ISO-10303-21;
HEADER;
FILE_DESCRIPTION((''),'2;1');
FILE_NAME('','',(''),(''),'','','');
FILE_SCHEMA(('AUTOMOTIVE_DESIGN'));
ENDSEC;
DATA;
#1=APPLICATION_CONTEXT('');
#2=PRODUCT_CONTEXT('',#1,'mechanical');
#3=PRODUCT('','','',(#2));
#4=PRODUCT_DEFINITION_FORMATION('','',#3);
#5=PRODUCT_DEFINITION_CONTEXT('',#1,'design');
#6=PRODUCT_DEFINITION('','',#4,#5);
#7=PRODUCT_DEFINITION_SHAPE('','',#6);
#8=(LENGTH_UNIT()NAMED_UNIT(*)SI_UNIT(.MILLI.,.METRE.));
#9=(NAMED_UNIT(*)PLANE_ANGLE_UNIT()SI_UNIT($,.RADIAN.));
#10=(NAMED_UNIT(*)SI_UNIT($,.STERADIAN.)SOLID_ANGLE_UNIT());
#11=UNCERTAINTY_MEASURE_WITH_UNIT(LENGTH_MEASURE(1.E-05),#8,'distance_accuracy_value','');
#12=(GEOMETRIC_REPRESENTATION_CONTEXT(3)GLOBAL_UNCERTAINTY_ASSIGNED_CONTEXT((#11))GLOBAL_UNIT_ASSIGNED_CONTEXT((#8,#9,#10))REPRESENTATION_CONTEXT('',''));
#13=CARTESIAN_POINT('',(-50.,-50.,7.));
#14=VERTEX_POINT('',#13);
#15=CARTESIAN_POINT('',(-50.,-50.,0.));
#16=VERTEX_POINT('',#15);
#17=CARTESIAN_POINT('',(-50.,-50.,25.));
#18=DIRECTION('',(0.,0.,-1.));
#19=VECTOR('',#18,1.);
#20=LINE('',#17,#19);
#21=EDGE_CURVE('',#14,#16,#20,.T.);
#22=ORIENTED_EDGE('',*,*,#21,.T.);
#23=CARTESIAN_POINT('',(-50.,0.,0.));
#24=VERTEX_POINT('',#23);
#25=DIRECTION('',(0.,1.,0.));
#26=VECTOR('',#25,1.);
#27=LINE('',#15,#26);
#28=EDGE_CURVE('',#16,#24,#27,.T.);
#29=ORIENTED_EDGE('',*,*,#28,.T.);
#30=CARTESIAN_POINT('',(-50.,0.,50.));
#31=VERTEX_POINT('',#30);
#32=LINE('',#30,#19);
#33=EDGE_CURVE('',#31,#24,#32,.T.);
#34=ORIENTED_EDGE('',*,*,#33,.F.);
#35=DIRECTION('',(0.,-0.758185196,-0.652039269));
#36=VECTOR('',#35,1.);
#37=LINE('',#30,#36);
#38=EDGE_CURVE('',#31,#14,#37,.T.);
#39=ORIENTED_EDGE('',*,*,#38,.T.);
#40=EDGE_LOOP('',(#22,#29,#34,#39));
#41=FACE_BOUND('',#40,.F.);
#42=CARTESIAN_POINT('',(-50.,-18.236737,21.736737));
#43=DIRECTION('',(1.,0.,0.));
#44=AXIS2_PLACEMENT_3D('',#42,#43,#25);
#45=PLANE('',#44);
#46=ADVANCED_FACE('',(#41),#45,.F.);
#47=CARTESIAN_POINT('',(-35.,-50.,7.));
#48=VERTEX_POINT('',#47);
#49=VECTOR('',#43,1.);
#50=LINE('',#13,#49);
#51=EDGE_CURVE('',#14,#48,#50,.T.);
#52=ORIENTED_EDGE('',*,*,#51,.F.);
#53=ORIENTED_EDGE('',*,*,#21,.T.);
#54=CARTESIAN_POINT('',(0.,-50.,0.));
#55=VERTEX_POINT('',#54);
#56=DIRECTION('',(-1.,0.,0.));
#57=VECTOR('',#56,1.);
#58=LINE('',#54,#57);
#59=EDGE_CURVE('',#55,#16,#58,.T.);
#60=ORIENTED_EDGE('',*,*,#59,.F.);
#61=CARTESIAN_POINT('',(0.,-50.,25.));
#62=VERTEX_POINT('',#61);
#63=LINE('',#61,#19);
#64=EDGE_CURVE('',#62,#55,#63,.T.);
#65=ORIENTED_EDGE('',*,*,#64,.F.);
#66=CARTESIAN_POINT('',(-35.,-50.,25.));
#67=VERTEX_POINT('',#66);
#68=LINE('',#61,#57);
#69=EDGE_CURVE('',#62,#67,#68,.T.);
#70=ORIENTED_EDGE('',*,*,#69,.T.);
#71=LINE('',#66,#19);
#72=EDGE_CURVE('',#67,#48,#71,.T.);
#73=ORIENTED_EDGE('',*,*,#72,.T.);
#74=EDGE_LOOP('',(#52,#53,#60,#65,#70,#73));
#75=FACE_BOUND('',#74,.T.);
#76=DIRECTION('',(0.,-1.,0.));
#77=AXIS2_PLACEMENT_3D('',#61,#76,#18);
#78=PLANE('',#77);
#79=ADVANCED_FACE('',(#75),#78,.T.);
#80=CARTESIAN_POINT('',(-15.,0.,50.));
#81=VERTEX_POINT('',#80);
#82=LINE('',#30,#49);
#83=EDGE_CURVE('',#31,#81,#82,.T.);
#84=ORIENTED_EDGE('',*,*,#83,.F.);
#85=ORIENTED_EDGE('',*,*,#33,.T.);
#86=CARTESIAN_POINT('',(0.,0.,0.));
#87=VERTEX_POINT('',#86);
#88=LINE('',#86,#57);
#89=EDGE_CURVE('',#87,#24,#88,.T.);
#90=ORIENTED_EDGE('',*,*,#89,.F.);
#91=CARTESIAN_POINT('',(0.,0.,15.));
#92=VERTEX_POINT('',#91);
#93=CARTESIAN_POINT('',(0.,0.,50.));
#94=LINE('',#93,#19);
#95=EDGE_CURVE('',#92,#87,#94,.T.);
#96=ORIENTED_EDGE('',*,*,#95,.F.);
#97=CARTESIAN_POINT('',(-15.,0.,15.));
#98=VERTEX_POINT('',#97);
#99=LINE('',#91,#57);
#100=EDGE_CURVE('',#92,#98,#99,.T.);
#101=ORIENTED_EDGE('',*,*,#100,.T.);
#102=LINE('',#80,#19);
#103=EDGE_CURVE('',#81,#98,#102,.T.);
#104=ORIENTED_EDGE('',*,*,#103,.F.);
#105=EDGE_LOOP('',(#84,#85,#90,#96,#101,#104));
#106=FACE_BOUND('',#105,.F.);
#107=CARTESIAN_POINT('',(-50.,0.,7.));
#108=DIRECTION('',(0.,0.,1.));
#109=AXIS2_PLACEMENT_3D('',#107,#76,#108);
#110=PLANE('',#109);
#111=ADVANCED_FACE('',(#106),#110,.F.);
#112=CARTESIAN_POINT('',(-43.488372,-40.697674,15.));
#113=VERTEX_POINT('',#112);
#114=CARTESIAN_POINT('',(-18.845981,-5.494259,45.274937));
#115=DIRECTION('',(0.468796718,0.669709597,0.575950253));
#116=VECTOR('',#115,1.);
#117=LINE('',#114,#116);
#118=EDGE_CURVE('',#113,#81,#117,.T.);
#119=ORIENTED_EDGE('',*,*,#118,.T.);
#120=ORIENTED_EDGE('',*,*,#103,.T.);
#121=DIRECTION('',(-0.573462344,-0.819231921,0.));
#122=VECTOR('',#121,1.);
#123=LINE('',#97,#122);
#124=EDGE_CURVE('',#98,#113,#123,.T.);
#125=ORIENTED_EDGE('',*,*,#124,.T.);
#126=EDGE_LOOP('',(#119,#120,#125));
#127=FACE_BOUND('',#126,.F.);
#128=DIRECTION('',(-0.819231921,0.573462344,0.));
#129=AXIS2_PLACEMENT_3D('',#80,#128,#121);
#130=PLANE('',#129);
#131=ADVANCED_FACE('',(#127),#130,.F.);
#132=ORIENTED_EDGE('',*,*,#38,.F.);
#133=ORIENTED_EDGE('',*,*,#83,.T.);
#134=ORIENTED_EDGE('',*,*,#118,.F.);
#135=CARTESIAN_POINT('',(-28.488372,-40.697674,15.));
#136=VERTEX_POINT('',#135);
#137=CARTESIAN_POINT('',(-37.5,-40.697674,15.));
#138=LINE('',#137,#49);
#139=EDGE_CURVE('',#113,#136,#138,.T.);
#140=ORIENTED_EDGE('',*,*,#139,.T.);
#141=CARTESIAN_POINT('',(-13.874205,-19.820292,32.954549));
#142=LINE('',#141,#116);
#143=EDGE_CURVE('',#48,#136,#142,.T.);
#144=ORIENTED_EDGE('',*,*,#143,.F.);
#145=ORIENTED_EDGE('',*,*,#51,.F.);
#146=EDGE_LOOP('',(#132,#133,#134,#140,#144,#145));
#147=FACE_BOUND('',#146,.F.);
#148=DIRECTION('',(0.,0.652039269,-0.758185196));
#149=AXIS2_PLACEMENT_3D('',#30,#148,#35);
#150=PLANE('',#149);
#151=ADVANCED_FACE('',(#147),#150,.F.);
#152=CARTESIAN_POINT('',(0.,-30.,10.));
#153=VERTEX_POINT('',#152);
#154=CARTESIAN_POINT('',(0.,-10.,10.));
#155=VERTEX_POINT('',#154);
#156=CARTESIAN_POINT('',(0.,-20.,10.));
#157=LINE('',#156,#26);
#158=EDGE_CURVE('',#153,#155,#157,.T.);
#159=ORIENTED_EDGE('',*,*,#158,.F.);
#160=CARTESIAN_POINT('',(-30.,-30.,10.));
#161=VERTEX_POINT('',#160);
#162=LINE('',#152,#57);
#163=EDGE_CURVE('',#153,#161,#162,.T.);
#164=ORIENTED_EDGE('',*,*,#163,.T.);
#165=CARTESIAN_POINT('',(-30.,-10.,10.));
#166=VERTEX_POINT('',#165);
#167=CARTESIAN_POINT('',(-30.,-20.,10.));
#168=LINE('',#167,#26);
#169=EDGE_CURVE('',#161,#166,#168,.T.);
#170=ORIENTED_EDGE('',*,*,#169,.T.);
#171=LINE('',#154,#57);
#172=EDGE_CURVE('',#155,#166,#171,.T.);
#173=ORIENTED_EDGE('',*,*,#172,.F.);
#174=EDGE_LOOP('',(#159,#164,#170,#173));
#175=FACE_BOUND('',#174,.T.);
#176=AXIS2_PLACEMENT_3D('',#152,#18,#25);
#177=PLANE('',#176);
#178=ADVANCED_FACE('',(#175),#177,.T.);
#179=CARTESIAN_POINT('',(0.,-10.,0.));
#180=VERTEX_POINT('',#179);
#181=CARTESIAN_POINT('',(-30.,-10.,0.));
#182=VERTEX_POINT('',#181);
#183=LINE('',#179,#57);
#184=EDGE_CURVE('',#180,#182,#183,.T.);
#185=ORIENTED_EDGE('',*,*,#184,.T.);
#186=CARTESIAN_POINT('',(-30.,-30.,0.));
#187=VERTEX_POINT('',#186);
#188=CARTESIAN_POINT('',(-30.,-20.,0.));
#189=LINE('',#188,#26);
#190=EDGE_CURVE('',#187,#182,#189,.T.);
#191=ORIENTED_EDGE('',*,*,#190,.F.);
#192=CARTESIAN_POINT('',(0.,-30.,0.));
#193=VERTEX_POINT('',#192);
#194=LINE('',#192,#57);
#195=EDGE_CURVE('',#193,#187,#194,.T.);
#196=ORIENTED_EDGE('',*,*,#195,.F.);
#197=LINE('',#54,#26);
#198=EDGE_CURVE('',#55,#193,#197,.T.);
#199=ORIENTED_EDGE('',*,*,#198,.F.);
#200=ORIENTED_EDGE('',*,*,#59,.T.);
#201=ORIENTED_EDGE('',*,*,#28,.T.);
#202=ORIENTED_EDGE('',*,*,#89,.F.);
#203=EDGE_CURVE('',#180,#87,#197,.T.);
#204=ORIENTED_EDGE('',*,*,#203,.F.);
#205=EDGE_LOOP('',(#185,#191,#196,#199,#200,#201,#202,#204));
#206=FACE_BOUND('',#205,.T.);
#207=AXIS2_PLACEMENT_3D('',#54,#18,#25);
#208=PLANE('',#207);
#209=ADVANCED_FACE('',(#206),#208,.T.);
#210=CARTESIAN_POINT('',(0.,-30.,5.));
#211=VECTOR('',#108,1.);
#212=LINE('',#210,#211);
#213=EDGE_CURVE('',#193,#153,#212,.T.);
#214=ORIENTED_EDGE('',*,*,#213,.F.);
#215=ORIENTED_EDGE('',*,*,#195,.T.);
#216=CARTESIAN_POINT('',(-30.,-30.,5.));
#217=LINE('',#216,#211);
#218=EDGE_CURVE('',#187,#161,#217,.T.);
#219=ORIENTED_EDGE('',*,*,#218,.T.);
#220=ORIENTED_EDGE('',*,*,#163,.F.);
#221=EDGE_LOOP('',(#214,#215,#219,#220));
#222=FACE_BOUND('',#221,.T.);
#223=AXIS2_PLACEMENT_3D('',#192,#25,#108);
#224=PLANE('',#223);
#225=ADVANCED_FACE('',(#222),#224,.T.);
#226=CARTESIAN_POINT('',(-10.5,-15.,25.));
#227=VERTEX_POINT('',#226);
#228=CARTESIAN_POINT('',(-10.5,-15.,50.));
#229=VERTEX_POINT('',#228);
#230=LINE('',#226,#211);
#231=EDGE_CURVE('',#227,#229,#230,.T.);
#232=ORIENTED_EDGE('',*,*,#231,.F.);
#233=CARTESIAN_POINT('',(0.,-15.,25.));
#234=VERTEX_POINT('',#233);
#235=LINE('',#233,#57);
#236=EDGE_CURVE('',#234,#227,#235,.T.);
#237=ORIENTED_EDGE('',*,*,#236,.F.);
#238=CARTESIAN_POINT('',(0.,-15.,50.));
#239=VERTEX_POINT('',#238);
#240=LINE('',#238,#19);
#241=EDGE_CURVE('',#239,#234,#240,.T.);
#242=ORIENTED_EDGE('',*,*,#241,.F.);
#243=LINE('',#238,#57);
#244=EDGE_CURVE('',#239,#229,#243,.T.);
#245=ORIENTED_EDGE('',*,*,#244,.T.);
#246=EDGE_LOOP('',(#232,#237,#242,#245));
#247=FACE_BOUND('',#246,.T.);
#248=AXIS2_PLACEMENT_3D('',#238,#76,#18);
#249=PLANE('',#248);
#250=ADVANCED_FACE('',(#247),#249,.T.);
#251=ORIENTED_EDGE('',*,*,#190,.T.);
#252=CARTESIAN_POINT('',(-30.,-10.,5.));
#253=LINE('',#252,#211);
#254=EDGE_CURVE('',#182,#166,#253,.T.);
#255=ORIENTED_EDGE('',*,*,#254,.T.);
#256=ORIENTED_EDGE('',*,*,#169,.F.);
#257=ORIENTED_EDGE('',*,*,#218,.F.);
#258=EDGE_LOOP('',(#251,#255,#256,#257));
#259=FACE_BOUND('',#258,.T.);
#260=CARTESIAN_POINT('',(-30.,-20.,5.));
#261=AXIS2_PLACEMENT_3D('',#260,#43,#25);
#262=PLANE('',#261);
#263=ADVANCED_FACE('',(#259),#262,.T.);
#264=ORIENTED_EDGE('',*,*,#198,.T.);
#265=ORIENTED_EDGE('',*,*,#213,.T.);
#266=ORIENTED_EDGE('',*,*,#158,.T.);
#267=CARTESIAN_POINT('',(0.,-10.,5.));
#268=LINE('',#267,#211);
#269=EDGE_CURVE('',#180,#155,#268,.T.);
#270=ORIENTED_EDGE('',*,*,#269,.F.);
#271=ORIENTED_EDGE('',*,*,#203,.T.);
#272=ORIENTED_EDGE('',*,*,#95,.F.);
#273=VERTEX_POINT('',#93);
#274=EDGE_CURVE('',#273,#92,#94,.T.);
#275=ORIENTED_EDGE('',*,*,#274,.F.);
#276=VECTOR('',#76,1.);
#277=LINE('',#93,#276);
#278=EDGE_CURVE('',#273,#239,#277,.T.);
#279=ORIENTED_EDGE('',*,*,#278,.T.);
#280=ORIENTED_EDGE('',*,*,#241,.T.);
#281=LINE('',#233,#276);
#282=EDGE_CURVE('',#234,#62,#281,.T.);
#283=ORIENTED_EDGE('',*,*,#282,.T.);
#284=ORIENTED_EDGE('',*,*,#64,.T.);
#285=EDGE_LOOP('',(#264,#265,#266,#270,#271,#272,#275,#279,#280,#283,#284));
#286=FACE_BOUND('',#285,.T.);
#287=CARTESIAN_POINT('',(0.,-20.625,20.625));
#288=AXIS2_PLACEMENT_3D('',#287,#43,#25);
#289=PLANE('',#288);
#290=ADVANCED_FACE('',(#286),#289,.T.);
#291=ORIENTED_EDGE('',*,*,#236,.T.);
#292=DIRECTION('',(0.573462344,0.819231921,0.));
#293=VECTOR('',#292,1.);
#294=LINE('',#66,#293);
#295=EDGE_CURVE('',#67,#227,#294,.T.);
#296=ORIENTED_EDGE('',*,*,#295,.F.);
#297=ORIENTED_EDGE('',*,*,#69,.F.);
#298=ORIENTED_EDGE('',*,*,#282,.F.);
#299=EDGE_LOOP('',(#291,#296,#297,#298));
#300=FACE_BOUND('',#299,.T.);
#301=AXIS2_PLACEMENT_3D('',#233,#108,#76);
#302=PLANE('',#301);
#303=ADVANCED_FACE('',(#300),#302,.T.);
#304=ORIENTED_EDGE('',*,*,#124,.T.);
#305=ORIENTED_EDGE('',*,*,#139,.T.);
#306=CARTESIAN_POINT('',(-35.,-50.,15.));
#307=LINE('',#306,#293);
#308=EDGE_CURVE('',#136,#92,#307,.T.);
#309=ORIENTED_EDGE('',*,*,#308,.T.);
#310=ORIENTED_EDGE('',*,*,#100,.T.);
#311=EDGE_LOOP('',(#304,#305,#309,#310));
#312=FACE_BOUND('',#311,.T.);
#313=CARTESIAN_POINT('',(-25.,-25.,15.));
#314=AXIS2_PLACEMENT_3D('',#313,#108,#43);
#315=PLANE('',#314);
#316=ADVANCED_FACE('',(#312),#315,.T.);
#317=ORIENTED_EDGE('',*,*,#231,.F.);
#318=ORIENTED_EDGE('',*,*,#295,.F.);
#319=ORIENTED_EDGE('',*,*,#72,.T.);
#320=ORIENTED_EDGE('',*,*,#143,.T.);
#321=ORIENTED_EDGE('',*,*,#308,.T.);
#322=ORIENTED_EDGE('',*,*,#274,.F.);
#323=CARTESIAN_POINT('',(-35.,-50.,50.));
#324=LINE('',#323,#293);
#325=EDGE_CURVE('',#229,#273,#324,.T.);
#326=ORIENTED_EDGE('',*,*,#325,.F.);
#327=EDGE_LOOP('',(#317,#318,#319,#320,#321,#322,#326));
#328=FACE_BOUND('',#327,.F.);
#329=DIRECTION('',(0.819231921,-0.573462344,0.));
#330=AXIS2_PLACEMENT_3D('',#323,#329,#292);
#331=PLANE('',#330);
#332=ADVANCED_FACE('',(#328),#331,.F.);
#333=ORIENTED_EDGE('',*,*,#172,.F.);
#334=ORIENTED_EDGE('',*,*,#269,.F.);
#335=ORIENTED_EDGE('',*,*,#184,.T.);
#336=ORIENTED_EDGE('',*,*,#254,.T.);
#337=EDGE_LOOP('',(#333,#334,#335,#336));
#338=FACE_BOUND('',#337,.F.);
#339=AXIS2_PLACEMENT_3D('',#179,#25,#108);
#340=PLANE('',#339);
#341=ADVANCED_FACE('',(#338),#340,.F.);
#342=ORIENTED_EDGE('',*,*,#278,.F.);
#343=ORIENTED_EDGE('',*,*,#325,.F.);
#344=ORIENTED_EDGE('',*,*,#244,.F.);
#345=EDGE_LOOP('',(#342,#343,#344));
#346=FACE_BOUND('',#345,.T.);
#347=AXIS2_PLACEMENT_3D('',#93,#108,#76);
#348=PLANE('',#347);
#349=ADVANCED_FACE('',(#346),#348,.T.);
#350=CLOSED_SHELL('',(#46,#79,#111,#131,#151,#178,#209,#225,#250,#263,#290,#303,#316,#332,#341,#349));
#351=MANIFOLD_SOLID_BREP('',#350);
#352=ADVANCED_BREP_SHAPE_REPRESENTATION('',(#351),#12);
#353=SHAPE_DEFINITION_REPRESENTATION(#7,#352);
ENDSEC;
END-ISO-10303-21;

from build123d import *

# Parameters (mm, degrees)
F1_DEPTH  = 50
F4_DEPTH  = 43
F7_REACH  = 115.9479483752
F11_DEPTH = 35
F12_W     = 20
F12_H     = 10
F14_DEPTH = 30


with BuildPart() as f1:
    # F0 (on Right) → F1 (new body)
    with BuildSketch(Plane.YZ):
        Polygon((-50, 0), (0, 0), (0, 50), (-15, 50), (-15, 25), (-50, 25), align=None)
    extrude(amount=-F1_DEPTH)

    # F2 (on face) → F4 (cut, through all)
    with BuildSketch(Plane.XY.offset(50)):
        Polygon((0, 0), (-50, 0), (-50, -50), (-35, -50), align=None)
    extrude(amount=-F4_DEPTH, mode=Mode.SUBTRACT)

    f7_end = Plane(origin=(-13.8970588235, -19.8529411765, 22.3235294118), x_dir=(-0.5734623444, -0.8192319205, 0), z_dir=(-0.8192319205, 0.5734623444, 0))
    # F6 (on plane+point) → F7 (join, up to a plane its end follows)
    with BuildSketch(Plane.YZ.offset(-50)):
        Polygon((-50, 7), (0, 7), (0, 50), align=None)
    f7_long = extrude(amount=F7_REACH, mode=Mode.PRIVATE)
    add(split(f7_long, bisect_by=f7_end, keep=Keep.TOP, mode=Mode.PRIVATE))

    # F9 (on plane+point) → F11 (cut, through all)
    with BuildSketch(Plane.XY.offset(50)):
        Polygon((0, 0), (-15, 0), (-50, -50), (-35, -50), align=None)
    extrude(amount=-F11_DEPTH, mode=Mode.SUBTRACT)

    # F12 (on face) → F14 (cut, through all)
    with BuildSketch(Plane.YZ):
        with Locations((-20, 5)):
            Rectangle(F12_W, F12_H)
    extrude(amount=-F14_DEPTH, mode=Mode.SUBTRACT)


solid = f1.part
